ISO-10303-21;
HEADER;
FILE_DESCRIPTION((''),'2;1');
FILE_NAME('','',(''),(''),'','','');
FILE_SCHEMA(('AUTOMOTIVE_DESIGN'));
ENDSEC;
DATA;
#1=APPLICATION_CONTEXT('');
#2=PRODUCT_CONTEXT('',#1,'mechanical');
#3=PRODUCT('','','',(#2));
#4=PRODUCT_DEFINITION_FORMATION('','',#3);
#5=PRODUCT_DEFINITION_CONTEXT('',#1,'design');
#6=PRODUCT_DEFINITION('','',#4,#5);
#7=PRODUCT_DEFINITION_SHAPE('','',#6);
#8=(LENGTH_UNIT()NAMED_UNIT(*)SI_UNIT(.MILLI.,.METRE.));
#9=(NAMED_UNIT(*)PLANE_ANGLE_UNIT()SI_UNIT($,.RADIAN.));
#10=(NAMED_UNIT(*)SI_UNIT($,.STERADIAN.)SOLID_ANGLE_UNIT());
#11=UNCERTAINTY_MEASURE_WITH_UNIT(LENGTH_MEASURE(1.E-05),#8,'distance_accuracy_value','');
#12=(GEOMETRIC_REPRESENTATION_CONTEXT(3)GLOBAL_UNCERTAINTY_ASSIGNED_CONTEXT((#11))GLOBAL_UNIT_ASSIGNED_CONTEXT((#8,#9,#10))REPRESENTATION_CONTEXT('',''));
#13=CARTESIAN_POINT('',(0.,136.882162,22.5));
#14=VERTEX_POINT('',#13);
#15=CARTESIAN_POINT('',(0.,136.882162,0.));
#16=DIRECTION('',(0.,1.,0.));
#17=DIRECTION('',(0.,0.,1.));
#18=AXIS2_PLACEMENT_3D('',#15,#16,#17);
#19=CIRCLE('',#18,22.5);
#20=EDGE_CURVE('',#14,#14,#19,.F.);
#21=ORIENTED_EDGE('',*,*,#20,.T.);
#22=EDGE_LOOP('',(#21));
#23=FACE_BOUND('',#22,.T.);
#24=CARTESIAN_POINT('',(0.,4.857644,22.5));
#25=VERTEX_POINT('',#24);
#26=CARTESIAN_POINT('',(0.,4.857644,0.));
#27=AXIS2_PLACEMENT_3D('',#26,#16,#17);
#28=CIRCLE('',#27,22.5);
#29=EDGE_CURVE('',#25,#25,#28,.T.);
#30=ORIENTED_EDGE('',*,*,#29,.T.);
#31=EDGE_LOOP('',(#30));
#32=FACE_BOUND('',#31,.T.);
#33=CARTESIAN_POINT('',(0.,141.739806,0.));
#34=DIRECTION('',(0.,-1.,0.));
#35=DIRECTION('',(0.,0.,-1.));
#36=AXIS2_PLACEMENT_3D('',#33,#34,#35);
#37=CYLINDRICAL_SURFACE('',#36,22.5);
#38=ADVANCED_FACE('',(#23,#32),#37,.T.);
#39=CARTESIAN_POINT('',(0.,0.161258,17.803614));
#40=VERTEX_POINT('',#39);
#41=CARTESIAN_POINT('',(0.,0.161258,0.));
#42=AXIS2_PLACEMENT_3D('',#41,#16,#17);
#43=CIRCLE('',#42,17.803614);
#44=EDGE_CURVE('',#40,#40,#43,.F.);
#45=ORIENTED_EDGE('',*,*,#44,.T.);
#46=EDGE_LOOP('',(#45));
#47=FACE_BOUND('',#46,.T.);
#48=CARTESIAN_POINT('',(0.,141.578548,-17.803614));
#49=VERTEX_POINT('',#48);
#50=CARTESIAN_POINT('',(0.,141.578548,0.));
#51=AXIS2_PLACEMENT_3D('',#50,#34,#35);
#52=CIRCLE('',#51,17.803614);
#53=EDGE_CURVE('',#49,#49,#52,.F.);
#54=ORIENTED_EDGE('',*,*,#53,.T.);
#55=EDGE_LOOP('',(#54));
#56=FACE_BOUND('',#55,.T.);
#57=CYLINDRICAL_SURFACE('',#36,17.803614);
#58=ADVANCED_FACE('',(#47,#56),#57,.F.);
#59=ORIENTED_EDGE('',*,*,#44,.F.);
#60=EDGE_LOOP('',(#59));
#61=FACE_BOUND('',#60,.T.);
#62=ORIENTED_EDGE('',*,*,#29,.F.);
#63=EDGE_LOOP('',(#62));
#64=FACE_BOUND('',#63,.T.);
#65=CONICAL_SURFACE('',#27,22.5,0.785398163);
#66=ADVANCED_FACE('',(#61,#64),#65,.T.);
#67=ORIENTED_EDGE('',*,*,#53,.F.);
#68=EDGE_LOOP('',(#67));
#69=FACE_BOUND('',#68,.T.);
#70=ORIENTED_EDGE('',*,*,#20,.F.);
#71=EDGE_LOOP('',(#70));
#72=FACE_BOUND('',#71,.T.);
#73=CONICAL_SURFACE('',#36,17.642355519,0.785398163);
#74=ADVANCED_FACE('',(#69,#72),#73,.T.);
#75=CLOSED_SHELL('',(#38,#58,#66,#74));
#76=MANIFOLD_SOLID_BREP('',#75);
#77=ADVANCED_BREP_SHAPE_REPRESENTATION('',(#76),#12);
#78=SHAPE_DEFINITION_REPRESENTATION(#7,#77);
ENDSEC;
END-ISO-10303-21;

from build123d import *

# Parameters (mm, degrees)
SKETCH1_R           = 22.5
BOSS_EXTRUDE1_DEPTH = 141.739806
SKETCH2_R           = 17.803613723
CUT_EXTRUDE1_DEPTH  = 146.267589658


with BuildPart() as part:
    # Sketch1 → Boss-Extrude1 (new body)
    with BuildSketch(Plane(origin=(0, 0, 0), x_dir=(1, 0, 0), z_dir=(0, 1, 0))):
        with Locations(Location((0, 0, 0), (0, 0, 270))):
            Circle(SKETCH1_R)
    extrude(amount=BOSS_EXTRUDE1_DEPTH)

    # Sketch2 → Cut-Extrude1 (cut, through all)
    with BuildSketch(Plane(origin=(0, 0, 0), x_dir=(1, 0, 0), z_dir=(0, 1, 0))):
        with Locations(Location((0, 0, 0), (0, 0, 270))):
            Circle(SKETCH2_R)
    extrude(amount=CUT_EXTRUDE1_DEPTH, mode=Mode.SUBTRACT)

    # Chamfer1: read off the stored shape, not the designer's step
    # Chamfer1 outline → Chamfer1 (revolve, cut)
    with BuildSketch(Plane.XY):
        Polygon((22.5, 136.88216168), (22.5, 141.73980616), (17.803613723, 141.73980616), (17.803613723, 141.578547956), align=None)
        Polygon((22.5, 4.857644481), (17.803613723, 0.161258204), (17.803613723, 0), (22.5, 0), align=None)
    revolve(axis=Axis((0, 0, 0), (0, 1, 0)), mode=Mode.SUBTRACT)


solid = part.part
